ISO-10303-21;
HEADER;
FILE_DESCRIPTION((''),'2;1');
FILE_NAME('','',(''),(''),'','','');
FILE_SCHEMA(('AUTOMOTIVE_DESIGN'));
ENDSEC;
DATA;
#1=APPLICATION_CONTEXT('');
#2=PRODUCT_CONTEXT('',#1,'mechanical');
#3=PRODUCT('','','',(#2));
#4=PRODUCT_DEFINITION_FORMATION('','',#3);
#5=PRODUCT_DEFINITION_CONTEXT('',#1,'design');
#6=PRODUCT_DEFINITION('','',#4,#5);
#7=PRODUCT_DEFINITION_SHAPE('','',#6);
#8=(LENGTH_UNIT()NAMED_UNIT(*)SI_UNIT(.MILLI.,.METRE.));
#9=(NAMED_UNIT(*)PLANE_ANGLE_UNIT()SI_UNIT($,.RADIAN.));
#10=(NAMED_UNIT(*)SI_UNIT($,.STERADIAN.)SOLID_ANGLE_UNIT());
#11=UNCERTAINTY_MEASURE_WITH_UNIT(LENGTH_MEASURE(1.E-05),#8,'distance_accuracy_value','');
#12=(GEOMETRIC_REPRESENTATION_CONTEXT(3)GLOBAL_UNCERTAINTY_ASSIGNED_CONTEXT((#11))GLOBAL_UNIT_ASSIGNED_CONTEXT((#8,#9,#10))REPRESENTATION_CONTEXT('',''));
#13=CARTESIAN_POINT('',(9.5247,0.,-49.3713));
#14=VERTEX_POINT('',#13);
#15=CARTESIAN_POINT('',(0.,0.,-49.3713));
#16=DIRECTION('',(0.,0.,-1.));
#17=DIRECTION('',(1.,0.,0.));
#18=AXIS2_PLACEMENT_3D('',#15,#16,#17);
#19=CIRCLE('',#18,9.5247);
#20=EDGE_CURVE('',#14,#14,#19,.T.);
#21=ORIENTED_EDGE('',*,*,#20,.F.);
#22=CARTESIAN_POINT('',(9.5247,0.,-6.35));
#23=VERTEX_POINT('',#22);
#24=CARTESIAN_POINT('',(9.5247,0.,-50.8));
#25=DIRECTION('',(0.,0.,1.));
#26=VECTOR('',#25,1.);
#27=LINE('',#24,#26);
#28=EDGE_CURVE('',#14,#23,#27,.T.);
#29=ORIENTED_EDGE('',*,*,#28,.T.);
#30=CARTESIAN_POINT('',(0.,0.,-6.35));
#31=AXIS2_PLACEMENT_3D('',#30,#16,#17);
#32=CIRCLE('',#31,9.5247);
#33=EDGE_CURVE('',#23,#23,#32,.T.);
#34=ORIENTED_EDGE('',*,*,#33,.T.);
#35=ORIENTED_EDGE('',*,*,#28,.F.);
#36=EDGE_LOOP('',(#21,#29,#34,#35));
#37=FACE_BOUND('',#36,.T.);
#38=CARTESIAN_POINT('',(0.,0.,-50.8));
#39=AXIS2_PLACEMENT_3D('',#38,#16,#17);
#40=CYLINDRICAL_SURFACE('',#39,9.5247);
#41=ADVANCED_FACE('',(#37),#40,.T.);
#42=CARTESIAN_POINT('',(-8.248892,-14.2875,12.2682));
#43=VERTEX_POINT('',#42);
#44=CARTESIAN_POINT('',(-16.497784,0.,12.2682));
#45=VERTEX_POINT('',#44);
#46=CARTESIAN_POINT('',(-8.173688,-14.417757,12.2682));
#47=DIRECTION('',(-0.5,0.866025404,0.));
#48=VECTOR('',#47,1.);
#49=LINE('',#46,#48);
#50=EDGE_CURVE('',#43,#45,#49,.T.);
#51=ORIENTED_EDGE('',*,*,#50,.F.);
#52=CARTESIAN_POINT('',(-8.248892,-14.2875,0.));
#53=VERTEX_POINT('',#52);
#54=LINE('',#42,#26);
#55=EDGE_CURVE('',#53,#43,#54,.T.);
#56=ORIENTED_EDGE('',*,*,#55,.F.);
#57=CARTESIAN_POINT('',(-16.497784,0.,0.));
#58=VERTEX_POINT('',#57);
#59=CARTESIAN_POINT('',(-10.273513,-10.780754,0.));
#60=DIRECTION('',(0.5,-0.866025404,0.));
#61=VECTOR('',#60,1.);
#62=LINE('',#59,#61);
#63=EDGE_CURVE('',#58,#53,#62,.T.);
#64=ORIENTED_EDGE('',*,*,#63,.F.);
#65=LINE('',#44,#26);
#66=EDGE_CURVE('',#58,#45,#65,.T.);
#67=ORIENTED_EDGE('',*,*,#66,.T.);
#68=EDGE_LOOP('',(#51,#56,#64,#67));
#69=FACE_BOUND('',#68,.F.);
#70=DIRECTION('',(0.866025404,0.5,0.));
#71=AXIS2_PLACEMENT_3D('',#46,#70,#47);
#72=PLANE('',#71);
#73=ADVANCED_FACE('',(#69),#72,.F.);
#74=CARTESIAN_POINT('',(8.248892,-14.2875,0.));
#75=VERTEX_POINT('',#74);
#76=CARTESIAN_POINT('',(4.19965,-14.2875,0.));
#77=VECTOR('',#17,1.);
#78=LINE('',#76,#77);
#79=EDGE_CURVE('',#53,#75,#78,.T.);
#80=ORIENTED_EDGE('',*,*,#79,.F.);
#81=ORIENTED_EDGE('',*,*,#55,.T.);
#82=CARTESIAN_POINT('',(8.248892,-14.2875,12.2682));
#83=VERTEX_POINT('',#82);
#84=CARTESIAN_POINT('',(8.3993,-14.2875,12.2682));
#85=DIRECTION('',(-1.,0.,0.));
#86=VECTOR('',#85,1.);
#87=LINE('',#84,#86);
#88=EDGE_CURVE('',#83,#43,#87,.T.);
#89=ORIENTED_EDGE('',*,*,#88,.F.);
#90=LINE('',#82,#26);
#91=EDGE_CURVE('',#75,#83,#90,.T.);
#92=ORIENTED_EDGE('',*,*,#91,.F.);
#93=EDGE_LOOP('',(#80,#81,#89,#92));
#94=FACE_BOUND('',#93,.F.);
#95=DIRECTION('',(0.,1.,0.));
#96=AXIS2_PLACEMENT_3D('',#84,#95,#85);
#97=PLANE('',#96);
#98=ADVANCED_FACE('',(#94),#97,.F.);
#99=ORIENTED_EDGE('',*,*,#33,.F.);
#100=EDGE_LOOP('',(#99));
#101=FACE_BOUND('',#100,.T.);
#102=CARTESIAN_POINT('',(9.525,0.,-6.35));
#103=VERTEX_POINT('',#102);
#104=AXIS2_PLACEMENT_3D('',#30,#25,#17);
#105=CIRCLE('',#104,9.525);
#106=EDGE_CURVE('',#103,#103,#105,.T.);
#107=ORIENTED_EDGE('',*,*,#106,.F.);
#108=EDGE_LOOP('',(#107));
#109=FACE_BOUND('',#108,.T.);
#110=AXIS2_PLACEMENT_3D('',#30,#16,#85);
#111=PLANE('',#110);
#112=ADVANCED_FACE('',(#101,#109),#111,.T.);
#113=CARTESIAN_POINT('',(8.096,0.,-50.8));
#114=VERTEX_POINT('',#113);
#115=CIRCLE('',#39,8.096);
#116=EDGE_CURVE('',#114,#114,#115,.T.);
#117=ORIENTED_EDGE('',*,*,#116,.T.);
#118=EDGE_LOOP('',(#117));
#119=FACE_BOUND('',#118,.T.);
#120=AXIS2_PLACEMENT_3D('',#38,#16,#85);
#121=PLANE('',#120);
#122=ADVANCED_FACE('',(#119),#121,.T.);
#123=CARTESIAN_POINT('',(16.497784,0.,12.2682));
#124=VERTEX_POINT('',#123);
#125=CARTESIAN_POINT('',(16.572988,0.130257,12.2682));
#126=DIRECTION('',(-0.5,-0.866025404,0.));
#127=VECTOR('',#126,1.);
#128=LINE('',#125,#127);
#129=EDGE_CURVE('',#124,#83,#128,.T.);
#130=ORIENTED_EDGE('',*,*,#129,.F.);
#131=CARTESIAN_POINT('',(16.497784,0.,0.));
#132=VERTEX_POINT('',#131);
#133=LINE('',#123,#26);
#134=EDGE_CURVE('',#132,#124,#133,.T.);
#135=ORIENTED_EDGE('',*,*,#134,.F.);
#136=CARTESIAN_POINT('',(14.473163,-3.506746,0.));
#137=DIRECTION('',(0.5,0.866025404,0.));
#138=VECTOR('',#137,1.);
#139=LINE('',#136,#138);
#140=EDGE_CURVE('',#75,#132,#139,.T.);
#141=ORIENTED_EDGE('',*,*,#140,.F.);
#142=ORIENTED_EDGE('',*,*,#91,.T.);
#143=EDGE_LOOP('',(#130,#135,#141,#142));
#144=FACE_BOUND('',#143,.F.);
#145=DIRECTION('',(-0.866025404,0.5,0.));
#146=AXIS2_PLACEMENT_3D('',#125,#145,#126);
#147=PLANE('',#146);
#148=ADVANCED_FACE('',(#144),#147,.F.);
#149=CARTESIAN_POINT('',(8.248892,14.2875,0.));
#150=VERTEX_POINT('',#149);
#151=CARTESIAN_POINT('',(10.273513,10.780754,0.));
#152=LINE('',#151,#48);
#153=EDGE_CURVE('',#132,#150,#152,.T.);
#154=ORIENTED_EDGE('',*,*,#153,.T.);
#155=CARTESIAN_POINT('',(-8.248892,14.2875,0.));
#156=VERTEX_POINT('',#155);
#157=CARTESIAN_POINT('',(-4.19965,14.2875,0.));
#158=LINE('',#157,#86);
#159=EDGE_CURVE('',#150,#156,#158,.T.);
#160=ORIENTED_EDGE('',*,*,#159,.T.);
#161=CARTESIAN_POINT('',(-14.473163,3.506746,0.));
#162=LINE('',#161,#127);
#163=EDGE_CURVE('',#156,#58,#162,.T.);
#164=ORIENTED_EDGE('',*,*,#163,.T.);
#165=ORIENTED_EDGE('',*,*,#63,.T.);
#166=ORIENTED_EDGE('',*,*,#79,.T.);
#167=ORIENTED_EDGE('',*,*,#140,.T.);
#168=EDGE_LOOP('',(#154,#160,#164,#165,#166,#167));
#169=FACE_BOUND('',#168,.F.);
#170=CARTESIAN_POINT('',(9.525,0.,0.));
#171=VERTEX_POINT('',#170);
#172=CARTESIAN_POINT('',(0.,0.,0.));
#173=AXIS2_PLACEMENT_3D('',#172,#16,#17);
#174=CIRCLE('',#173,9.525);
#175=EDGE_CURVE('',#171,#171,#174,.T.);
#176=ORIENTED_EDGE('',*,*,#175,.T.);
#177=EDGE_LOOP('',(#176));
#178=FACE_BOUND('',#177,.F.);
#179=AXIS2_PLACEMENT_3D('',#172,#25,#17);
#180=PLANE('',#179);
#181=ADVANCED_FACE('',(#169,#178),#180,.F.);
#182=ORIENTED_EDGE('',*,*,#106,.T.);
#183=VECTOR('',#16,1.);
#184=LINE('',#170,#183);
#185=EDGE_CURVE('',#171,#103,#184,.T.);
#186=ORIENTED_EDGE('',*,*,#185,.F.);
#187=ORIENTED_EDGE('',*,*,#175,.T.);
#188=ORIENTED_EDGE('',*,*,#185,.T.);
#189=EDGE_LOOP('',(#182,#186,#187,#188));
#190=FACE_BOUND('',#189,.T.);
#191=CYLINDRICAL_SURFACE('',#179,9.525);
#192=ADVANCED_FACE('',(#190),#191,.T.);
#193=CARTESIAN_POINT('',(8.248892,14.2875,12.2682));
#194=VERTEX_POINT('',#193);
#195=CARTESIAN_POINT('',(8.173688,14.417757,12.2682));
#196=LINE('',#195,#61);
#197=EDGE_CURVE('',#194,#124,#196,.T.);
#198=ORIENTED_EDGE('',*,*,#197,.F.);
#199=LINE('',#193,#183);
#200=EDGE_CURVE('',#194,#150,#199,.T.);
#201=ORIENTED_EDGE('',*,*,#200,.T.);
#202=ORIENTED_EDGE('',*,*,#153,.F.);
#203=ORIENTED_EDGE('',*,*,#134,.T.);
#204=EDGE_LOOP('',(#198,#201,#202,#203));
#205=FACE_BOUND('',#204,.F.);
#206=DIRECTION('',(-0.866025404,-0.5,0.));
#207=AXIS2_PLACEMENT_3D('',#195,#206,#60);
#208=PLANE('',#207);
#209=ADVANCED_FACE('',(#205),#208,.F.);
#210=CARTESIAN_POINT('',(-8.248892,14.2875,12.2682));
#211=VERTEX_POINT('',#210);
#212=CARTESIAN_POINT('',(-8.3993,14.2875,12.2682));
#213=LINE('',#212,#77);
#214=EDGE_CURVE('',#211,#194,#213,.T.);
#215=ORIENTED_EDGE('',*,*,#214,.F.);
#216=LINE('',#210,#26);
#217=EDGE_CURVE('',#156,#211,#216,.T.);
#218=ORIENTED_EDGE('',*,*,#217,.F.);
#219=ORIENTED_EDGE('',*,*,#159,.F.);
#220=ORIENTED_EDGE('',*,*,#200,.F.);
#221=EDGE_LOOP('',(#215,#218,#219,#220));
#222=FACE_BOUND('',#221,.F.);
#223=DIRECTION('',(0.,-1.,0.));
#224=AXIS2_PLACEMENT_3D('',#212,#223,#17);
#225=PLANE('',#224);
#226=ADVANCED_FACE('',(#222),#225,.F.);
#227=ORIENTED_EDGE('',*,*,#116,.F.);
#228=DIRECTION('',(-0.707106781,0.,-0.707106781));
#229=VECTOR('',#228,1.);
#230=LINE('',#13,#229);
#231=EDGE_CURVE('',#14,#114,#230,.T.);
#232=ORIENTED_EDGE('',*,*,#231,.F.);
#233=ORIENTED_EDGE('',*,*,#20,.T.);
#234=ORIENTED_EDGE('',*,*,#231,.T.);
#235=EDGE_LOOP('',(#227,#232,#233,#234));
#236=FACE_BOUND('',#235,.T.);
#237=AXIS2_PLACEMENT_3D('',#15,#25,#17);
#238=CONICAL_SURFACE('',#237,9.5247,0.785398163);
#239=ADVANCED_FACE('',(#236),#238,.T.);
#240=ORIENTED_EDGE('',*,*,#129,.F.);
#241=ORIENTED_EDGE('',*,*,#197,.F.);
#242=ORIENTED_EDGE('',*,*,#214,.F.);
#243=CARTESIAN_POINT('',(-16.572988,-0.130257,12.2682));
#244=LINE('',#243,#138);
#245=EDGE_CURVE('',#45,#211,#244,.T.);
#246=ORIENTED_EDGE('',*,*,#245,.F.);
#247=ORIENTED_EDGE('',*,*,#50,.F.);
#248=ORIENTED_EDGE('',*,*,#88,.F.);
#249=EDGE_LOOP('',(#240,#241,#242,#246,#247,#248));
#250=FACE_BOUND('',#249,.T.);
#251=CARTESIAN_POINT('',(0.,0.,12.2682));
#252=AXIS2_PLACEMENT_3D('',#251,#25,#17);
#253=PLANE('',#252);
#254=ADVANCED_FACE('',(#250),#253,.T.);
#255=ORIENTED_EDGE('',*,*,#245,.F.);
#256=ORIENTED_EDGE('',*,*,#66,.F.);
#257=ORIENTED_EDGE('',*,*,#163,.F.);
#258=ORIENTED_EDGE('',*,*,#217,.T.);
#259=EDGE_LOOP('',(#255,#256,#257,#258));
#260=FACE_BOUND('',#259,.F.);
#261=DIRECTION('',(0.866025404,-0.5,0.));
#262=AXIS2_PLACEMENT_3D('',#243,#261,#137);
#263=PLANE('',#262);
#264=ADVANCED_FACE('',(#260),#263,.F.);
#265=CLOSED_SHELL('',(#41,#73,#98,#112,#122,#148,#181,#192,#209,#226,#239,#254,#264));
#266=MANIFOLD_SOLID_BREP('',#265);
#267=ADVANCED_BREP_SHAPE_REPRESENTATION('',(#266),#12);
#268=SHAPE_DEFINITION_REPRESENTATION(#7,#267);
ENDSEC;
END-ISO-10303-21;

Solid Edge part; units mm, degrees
sketch "Sketch1" plane through (0, 0, 0) normal (0, 0, 1) x (1, 0, 0)
  circle A0 centre (0, 0) radius 16.5735
  dimension "D1" = 33.147
extrude "Protrusion1" add sketch "Sketch1" along normal blind 12.2682
sketch "Sketch2" plane through (0, 0, 0) normal (0, 0, -1) x (1, 0, 0)
  circle A0 centre (0, 0) radius 9.525
extrude "Protrusion2" add sketch "Sketch2" along normal blind 50.8
sketch "Sketch3" plane through (0, 0, -50.8) normal (0, 0, -1) x (1, 0, 0)
  circle A0 centre (0, 0) radius 9.5247
extrude "Cutout1" cut sketch "Sketch3" against normal blind 44.45 flip side to cut
chamfer "Chamfer_1" distance 1.4287 angle 45 1 edges at (-9.5247, 0, -50.8)
sketch "Sketch4" plane through (0, 0, 12.2682) normal (0, 0, 1) x (1, 0, 0)
  line L0 (-8.3993, 14.2875) -> (8.3993, 14.2875)
  dimension "D1" = 28.575
extrude "Cutout2" cut sketch "Sketch4" against normal up to next material side at (0, 14.3375, 12.2682)
pattern_circular "Pattern1" count 6 over 360 about axis through (0, 0, 12.2682) along (0, 0, 1) of "Cutout2"
properties part number "24107286"
